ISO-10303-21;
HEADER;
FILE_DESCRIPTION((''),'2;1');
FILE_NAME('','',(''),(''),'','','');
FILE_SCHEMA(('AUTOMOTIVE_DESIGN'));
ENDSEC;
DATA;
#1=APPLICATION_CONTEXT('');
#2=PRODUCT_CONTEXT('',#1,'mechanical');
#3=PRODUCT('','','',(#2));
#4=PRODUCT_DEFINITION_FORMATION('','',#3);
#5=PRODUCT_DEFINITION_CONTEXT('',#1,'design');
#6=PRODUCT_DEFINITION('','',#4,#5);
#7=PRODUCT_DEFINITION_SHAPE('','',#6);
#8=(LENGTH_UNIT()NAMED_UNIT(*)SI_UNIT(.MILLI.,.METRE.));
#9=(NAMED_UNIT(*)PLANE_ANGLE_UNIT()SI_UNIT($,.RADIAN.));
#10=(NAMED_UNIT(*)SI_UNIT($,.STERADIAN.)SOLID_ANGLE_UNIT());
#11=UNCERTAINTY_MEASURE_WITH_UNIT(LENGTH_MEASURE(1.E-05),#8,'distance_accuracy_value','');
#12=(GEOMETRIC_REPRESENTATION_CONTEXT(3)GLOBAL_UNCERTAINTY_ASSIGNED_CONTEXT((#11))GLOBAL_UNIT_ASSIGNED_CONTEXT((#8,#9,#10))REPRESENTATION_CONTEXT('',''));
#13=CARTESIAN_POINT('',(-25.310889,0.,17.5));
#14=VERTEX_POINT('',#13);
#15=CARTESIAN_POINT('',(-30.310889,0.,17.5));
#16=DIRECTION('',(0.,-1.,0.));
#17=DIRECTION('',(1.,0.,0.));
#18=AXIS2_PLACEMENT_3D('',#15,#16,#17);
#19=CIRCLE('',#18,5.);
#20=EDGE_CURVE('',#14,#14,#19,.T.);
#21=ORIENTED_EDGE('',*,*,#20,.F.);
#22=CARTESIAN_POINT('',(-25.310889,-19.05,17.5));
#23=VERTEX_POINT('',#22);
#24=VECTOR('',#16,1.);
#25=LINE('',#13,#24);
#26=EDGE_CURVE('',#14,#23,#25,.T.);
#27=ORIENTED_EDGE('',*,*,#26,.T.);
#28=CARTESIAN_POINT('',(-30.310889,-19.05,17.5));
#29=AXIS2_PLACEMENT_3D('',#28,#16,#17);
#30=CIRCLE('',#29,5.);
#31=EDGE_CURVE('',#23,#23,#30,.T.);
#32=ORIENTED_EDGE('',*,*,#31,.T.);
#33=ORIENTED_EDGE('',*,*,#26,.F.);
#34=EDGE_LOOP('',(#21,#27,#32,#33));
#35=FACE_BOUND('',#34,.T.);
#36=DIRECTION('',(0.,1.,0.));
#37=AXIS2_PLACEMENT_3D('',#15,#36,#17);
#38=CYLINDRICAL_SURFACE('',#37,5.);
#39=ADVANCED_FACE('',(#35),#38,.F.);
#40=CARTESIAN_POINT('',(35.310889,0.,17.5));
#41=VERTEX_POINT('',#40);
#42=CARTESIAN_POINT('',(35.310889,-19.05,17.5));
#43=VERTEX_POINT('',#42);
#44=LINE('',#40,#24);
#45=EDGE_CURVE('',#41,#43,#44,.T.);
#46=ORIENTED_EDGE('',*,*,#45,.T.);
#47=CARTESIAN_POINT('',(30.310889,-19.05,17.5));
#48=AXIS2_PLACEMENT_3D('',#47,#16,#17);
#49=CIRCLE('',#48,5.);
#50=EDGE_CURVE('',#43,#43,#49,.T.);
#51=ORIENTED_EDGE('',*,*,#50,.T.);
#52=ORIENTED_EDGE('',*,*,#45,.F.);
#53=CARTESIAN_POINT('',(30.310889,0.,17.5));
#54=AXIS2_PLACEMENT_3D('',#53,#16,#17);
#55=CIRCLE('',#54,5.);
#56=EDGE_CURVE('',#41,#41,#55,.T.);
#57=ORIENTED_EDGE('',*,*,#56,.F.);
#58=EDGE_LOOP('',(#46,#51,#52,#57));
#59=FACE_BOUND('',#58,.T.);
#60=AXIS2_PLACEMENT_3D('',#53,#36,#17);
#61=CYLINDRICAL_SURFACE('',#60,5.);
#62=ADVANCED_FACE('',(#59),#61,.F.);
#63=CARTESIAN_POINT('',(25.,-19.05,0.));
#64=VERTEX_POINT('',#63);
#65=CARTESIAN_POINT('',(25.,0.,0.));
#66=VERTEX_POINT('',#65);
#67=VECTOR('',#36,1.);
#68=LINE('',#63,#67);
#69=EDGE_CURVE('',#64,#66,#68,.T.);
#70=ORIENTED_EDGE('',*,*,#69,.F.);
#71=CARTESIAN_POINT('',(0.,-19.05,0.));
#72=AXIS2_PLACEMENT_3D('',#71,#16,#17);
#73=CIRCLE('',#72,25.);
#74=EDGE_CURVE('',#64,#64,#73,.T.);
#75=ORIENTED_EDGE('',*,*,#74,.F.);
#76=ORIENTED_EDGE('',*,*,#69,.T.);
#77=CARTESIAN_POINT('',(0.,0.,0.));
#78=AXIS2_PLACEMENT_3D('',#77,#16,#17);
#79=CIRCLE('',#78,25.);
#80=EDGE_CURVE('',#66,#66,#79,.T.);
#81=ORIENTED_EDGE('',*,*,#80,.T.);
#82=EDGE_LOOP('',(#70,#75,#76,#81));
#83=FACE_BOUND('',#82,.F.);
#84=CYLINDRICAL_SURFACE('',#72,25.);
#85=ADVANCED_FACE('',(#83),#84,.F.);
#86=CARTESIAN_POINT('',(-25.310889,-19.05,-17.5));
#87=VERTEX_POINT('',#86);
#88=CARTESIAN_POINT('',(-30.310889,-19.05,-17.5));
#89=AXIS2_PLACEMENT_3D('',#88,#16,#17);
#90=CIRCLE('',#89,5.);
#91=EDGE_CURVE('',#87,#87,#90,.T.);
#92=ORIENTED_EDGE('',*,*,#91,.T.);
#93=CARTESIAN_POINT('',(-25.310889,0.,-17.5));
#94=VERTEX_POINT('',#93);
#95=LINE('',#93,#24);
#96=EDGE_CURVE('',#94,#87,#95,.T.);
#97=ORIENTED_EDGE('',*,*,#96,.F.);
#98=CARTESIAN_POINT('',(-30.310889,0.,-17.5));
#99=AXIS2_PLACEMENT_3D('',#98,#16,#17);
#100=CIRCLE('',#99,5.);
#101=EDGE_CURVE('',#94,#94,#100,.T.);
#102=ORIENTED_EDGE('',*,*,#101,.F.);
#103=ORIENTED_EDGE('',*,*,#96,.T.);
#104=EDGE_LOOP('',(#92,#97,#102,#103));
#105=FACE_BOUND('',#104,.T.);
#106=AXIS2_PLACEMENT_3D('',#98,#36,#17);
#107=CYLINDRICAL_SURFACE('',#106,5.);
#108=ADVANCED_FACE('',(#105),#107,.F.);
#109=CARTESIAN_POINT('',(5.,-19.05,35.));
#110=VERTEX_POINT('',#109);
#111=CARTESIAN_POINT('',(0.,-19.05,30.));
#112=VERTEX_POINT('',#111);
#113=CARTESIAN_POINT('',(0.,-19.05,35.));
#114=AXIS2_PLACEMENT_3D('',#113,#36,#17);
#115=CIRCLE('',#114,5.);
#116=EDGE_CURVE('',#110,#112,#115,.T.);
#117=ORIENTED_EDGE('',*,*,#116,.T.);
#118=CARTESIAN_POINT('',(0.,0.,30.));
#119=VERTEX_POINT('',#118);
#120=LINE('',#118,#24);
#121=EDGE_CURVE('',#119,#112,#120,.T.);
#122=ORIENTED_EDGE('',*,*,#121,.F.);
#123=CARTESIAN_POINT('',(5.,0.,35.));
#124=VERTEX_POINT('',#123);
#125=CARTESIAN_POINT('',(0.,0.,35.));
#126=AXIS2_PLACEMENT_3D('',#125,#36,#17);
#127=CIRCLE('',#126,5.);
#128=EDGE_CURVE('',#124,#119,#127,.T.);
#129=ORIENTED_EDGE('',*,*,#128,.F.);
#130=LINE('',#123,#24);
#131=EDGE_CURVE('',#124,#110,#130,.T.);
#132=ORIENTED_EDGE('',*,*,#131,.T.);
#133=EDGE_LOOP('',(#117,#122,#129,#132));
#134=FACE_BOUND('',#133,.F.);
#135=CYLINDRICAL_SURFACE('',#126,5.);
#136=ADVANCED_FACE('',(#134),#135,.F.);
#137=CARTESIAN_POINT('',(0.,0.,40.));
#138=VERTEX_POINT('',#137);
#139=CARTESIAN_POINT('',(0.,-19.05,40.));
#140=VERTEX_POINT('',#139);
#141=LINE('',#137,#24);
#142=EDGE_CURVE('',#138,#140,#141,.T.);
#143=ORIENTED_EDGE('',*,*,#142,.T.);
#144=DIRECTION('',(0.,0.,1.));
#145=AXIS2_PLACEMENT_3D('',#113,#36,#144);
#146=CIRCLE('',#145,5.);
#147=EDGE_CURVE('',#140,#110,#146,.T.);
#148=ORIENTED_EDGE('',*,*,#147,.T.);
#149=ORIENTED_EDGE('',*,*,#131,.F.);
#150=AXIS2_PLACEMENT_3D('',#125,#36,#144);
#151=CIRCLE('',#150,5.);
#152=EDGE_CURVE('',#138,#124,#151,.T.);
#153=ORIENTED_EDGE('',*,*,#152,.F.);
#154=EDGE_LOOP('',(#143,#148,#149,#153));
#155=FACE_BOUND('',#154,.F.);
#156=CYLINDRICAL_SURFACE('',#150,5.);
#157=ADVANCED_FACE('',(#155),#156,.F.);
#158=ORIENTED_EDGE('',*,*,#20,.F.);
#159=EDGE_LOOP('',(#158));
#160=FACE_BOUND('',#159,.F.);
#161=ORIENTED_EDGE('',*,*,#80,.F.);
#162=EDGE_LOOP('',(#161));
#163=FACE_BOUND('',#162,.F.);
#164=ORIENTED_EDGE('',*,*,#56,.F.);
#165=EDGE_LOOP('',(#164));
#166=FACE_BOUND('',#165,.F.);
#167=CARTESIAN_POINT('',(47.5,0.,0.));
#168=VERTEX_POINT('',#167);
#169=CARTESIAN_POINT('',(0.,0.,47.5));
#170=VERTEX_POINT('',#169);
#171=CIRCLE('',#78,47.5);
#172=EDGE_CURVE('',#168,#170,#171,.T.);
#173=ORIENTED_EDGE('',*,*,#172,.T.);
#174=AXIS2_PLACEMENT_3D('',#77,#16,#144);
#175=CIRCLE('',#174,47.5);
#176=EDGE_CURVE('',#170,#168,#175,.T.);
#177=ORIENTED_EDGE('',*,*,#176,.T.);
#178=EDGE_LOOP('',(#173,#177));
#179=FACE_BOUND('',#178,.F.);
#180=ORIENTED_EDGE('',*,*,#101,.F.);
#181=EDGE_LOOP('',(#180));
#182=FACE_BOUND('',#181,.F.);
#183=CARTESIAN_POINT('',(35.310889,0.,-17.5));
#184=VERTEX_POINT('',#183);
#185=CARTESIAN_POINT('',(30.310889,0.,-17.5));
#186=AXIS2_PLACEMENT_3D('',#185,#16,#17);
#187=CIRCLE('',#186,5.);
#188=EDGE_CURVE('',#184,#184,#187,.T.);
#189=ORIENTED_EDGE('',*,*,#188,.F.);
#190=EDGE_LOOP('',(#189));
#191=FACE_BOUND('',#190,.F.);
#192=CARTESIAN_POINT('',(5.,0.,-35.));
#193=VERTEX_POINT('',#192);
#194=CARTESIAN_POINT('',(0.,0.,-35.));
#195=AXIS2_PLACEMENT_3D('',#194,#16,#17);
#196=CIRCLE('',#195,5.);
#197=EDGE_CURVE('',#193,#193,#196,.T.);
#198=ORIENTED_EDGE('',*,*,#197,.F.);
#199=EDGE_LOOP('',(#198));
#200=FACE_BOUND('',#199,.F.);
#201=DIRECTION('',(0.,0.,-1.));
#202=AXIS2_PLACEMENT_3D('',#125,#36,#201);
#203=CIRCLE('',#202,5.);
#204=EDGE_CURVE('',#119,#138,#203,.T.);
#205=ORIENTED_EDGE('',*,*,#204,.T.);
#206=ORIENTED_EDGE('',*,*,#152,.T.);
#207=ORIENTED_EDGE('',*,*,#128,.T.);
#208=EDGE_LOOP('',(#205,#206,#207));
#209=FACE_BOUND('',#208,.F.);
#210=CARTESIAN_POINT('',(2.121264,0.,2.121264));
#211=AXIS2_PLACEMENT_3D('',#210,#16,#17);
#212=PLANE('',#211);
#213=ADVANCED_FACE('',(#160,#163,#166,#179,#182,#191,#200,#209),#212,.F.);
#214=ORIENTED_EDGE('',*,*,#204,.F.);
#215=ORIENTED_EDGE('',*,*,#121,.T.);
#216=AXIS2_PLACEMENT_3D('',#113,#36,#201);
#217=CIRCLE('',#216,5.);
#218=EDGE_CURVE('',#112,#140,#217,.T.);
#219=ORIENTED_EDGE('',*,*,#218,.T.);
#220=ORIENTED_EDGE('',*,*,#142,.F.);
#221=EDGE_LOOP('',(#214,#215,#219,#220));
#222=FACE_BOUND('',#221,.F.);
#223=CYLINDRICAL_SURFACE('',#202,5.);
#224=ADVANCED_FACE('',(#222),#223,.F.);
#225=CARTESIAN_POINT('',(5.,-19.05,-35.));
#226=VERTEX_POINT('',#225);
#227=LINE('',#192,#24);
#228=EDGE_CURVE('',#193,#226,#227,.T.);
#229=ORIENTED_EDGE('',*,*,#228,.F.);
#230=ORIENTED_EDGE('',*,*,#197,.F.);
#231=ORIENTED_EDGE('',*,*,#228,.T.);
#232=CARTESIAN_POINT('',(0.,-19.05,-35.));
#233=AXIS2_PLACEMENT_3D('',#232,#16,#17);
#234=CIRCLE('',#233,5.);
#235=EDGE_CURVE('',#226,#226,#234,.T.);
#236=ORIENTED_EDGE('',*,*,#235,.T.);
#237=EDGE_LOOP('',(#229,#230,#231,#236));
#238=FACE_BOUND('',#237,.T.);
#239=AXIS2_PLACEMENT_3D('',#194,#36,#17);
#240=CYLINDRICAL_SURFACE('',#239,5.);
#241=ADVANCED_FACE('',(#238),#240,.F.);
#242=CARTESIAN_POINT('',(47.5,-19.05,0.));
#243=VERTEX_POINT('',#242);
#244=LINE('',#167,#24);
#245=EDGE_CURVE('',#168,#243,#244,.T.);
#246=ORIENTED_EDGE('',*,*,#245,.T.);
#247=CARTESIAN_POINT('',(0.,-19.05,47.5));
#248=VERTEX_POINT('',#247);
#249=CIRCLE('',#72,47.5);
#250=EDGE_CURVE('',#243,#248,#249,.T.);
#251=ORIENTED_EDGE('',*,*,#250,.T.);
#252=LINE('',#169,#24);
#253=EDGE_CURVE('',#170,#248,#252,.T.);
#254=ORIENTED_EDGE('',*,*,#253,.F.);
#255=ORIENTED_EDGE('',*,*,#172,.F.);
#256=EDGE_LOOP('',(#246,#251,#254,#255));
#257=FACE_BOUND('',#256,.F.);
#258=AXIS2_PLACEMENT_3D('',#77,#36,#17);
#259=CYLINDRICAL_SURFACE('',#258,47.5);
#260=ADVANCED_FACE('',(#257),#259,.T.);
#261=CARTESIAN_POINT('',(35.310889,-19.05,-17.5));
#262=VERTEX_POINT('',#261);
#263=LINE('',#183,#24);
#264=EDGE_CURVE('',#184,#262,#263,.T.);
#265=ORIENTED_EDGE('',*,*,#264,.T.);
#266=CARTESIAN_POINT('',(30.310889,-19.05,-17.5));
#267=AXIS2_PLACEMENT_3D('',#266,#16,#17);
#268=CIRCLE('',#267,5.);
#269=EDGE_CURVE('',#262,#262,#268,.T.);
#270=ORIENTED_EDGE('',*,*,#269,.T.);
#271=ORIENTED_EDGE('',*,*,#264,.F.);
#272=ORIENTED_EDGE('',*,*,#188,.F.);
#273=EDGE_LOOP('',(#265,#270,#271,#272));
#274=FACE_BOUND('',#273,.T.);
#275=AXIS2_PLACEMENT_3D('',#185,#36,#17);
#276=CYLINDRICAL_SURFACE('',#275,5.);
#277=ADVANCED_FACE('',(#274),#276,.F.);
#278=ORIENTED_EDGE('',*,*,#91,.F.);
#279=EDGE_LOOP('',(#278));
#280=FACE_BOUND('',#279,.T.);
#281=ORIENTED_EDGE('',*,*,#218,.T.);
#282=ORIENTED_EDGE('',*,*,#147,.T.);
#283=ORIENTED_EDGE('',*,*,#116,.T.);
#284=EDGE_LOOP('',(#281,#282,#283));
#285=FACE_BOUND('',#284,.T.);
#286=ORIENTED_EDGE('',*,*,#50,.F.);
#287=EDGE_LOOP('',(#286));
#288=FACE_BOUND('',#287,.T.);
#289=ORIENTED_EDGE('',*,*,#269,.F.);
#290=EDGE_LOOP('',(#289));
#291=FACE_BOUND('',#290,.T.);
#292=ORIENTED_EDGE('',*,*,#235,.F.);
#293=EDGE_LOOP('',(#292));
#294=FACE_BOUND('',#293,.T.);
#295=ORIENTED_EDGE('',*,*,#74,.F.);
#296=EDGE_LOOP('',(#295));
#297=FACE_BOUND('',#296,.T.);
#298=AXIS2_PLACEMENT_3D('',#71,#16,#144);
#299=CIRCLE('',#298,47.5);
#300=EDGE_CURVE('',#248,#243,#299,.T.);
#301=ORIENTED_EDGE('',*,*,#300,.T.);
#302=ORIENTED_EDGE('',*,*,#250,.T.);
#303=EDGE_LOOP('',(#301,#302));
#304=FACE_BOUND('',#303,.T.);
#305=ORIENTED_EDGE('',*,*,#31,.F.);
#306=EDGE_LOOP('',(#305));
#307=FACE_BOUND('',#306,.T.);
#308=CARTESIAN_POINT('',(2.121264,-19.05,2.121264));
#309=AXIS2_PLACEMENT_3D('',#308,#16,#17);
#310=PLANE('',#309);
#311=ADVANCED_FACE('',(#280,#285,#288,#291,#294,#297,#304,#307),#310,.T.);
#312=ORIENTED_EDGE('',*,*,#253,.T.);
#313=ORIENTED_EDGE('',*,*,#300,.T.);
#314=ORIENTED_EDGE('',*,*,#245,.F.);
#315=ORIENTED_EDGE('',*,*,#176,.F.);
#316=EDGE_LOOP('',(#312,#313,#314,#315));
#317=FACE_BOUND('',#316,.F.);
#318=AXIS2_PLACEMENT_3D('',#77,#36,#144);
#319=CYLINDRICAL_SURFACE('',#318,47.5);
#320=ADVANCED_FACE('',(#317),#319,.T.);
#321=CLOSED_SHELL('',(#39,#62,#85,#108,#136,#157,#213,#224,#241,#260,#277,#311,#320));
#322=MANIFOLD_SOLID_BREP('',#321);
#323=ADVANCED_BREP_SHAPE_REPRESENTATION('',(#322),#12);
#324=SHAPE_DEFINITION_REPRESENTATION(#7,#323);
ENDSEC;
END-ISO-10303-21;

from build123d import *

# Parameters (mm, degrees)
F0_R     = 5
F1_DEPTH = 19.05
F4_R     = 25
F5_DEPTH = 25.4


# Not quite as in the source:
# - a feature of the source that left no trace in its solid (it failed there, or was rolled back) is left out


with BuildPart() as f1:
    # F0 (on Front) → F1 (new body)
    with BuildSketch(Plane.XZ):
        with BuildLine():
            ThreePointArc((0, 47.5), (-33.5875721064, -33.5875721064), (47.5, 0))
            ThreePointArc((47.5, 0), (33.5875721064, 33.5875721064), (0, 47.5))
        make_face()
        with Locations((-30.3108891325, -17.5)):
            Circle(F0_R, mode=Mode.SUBTRACT)
        with Locations((0, -35)):
            Circle(F0_R, mode=Mode.SUBTRACT)
        with Locations((30.3108891325, -17.5)):
            Circle(F0_R, mode=Mode.SUBTRACT)
        with Locations((-30.3108891325, 17.5)):
            Circle(F0_R, mode=Mode.SUBTRACT)
        with Locations((30.3108891325, 17.5)):
            Circle(F0_R, mode=Mode.SUBTRACT)
        with BuildLine():
            ThreePointArc((0, 30), (-5, 35), (0, 40))
            ThreePointArc((0, 40), (3.5355339059, 38.5355339059), (5, 35))
            ThreePointArc((5, 35), (3.5355339059, 31.4644660941), (0, 30))
        make_face(mode=Mode.SUBTRACT)
    extrude(amount=F1_DEPTH)

    # F4 (on face) → F5 (cut)
    with BuildSketch(Plane.XZ.offset(19.05)):
        Circle(F4_R)
    extrude(amount=-F5_DEPTH, mode=Mode.SUBTRACT)


solid = f1.part
